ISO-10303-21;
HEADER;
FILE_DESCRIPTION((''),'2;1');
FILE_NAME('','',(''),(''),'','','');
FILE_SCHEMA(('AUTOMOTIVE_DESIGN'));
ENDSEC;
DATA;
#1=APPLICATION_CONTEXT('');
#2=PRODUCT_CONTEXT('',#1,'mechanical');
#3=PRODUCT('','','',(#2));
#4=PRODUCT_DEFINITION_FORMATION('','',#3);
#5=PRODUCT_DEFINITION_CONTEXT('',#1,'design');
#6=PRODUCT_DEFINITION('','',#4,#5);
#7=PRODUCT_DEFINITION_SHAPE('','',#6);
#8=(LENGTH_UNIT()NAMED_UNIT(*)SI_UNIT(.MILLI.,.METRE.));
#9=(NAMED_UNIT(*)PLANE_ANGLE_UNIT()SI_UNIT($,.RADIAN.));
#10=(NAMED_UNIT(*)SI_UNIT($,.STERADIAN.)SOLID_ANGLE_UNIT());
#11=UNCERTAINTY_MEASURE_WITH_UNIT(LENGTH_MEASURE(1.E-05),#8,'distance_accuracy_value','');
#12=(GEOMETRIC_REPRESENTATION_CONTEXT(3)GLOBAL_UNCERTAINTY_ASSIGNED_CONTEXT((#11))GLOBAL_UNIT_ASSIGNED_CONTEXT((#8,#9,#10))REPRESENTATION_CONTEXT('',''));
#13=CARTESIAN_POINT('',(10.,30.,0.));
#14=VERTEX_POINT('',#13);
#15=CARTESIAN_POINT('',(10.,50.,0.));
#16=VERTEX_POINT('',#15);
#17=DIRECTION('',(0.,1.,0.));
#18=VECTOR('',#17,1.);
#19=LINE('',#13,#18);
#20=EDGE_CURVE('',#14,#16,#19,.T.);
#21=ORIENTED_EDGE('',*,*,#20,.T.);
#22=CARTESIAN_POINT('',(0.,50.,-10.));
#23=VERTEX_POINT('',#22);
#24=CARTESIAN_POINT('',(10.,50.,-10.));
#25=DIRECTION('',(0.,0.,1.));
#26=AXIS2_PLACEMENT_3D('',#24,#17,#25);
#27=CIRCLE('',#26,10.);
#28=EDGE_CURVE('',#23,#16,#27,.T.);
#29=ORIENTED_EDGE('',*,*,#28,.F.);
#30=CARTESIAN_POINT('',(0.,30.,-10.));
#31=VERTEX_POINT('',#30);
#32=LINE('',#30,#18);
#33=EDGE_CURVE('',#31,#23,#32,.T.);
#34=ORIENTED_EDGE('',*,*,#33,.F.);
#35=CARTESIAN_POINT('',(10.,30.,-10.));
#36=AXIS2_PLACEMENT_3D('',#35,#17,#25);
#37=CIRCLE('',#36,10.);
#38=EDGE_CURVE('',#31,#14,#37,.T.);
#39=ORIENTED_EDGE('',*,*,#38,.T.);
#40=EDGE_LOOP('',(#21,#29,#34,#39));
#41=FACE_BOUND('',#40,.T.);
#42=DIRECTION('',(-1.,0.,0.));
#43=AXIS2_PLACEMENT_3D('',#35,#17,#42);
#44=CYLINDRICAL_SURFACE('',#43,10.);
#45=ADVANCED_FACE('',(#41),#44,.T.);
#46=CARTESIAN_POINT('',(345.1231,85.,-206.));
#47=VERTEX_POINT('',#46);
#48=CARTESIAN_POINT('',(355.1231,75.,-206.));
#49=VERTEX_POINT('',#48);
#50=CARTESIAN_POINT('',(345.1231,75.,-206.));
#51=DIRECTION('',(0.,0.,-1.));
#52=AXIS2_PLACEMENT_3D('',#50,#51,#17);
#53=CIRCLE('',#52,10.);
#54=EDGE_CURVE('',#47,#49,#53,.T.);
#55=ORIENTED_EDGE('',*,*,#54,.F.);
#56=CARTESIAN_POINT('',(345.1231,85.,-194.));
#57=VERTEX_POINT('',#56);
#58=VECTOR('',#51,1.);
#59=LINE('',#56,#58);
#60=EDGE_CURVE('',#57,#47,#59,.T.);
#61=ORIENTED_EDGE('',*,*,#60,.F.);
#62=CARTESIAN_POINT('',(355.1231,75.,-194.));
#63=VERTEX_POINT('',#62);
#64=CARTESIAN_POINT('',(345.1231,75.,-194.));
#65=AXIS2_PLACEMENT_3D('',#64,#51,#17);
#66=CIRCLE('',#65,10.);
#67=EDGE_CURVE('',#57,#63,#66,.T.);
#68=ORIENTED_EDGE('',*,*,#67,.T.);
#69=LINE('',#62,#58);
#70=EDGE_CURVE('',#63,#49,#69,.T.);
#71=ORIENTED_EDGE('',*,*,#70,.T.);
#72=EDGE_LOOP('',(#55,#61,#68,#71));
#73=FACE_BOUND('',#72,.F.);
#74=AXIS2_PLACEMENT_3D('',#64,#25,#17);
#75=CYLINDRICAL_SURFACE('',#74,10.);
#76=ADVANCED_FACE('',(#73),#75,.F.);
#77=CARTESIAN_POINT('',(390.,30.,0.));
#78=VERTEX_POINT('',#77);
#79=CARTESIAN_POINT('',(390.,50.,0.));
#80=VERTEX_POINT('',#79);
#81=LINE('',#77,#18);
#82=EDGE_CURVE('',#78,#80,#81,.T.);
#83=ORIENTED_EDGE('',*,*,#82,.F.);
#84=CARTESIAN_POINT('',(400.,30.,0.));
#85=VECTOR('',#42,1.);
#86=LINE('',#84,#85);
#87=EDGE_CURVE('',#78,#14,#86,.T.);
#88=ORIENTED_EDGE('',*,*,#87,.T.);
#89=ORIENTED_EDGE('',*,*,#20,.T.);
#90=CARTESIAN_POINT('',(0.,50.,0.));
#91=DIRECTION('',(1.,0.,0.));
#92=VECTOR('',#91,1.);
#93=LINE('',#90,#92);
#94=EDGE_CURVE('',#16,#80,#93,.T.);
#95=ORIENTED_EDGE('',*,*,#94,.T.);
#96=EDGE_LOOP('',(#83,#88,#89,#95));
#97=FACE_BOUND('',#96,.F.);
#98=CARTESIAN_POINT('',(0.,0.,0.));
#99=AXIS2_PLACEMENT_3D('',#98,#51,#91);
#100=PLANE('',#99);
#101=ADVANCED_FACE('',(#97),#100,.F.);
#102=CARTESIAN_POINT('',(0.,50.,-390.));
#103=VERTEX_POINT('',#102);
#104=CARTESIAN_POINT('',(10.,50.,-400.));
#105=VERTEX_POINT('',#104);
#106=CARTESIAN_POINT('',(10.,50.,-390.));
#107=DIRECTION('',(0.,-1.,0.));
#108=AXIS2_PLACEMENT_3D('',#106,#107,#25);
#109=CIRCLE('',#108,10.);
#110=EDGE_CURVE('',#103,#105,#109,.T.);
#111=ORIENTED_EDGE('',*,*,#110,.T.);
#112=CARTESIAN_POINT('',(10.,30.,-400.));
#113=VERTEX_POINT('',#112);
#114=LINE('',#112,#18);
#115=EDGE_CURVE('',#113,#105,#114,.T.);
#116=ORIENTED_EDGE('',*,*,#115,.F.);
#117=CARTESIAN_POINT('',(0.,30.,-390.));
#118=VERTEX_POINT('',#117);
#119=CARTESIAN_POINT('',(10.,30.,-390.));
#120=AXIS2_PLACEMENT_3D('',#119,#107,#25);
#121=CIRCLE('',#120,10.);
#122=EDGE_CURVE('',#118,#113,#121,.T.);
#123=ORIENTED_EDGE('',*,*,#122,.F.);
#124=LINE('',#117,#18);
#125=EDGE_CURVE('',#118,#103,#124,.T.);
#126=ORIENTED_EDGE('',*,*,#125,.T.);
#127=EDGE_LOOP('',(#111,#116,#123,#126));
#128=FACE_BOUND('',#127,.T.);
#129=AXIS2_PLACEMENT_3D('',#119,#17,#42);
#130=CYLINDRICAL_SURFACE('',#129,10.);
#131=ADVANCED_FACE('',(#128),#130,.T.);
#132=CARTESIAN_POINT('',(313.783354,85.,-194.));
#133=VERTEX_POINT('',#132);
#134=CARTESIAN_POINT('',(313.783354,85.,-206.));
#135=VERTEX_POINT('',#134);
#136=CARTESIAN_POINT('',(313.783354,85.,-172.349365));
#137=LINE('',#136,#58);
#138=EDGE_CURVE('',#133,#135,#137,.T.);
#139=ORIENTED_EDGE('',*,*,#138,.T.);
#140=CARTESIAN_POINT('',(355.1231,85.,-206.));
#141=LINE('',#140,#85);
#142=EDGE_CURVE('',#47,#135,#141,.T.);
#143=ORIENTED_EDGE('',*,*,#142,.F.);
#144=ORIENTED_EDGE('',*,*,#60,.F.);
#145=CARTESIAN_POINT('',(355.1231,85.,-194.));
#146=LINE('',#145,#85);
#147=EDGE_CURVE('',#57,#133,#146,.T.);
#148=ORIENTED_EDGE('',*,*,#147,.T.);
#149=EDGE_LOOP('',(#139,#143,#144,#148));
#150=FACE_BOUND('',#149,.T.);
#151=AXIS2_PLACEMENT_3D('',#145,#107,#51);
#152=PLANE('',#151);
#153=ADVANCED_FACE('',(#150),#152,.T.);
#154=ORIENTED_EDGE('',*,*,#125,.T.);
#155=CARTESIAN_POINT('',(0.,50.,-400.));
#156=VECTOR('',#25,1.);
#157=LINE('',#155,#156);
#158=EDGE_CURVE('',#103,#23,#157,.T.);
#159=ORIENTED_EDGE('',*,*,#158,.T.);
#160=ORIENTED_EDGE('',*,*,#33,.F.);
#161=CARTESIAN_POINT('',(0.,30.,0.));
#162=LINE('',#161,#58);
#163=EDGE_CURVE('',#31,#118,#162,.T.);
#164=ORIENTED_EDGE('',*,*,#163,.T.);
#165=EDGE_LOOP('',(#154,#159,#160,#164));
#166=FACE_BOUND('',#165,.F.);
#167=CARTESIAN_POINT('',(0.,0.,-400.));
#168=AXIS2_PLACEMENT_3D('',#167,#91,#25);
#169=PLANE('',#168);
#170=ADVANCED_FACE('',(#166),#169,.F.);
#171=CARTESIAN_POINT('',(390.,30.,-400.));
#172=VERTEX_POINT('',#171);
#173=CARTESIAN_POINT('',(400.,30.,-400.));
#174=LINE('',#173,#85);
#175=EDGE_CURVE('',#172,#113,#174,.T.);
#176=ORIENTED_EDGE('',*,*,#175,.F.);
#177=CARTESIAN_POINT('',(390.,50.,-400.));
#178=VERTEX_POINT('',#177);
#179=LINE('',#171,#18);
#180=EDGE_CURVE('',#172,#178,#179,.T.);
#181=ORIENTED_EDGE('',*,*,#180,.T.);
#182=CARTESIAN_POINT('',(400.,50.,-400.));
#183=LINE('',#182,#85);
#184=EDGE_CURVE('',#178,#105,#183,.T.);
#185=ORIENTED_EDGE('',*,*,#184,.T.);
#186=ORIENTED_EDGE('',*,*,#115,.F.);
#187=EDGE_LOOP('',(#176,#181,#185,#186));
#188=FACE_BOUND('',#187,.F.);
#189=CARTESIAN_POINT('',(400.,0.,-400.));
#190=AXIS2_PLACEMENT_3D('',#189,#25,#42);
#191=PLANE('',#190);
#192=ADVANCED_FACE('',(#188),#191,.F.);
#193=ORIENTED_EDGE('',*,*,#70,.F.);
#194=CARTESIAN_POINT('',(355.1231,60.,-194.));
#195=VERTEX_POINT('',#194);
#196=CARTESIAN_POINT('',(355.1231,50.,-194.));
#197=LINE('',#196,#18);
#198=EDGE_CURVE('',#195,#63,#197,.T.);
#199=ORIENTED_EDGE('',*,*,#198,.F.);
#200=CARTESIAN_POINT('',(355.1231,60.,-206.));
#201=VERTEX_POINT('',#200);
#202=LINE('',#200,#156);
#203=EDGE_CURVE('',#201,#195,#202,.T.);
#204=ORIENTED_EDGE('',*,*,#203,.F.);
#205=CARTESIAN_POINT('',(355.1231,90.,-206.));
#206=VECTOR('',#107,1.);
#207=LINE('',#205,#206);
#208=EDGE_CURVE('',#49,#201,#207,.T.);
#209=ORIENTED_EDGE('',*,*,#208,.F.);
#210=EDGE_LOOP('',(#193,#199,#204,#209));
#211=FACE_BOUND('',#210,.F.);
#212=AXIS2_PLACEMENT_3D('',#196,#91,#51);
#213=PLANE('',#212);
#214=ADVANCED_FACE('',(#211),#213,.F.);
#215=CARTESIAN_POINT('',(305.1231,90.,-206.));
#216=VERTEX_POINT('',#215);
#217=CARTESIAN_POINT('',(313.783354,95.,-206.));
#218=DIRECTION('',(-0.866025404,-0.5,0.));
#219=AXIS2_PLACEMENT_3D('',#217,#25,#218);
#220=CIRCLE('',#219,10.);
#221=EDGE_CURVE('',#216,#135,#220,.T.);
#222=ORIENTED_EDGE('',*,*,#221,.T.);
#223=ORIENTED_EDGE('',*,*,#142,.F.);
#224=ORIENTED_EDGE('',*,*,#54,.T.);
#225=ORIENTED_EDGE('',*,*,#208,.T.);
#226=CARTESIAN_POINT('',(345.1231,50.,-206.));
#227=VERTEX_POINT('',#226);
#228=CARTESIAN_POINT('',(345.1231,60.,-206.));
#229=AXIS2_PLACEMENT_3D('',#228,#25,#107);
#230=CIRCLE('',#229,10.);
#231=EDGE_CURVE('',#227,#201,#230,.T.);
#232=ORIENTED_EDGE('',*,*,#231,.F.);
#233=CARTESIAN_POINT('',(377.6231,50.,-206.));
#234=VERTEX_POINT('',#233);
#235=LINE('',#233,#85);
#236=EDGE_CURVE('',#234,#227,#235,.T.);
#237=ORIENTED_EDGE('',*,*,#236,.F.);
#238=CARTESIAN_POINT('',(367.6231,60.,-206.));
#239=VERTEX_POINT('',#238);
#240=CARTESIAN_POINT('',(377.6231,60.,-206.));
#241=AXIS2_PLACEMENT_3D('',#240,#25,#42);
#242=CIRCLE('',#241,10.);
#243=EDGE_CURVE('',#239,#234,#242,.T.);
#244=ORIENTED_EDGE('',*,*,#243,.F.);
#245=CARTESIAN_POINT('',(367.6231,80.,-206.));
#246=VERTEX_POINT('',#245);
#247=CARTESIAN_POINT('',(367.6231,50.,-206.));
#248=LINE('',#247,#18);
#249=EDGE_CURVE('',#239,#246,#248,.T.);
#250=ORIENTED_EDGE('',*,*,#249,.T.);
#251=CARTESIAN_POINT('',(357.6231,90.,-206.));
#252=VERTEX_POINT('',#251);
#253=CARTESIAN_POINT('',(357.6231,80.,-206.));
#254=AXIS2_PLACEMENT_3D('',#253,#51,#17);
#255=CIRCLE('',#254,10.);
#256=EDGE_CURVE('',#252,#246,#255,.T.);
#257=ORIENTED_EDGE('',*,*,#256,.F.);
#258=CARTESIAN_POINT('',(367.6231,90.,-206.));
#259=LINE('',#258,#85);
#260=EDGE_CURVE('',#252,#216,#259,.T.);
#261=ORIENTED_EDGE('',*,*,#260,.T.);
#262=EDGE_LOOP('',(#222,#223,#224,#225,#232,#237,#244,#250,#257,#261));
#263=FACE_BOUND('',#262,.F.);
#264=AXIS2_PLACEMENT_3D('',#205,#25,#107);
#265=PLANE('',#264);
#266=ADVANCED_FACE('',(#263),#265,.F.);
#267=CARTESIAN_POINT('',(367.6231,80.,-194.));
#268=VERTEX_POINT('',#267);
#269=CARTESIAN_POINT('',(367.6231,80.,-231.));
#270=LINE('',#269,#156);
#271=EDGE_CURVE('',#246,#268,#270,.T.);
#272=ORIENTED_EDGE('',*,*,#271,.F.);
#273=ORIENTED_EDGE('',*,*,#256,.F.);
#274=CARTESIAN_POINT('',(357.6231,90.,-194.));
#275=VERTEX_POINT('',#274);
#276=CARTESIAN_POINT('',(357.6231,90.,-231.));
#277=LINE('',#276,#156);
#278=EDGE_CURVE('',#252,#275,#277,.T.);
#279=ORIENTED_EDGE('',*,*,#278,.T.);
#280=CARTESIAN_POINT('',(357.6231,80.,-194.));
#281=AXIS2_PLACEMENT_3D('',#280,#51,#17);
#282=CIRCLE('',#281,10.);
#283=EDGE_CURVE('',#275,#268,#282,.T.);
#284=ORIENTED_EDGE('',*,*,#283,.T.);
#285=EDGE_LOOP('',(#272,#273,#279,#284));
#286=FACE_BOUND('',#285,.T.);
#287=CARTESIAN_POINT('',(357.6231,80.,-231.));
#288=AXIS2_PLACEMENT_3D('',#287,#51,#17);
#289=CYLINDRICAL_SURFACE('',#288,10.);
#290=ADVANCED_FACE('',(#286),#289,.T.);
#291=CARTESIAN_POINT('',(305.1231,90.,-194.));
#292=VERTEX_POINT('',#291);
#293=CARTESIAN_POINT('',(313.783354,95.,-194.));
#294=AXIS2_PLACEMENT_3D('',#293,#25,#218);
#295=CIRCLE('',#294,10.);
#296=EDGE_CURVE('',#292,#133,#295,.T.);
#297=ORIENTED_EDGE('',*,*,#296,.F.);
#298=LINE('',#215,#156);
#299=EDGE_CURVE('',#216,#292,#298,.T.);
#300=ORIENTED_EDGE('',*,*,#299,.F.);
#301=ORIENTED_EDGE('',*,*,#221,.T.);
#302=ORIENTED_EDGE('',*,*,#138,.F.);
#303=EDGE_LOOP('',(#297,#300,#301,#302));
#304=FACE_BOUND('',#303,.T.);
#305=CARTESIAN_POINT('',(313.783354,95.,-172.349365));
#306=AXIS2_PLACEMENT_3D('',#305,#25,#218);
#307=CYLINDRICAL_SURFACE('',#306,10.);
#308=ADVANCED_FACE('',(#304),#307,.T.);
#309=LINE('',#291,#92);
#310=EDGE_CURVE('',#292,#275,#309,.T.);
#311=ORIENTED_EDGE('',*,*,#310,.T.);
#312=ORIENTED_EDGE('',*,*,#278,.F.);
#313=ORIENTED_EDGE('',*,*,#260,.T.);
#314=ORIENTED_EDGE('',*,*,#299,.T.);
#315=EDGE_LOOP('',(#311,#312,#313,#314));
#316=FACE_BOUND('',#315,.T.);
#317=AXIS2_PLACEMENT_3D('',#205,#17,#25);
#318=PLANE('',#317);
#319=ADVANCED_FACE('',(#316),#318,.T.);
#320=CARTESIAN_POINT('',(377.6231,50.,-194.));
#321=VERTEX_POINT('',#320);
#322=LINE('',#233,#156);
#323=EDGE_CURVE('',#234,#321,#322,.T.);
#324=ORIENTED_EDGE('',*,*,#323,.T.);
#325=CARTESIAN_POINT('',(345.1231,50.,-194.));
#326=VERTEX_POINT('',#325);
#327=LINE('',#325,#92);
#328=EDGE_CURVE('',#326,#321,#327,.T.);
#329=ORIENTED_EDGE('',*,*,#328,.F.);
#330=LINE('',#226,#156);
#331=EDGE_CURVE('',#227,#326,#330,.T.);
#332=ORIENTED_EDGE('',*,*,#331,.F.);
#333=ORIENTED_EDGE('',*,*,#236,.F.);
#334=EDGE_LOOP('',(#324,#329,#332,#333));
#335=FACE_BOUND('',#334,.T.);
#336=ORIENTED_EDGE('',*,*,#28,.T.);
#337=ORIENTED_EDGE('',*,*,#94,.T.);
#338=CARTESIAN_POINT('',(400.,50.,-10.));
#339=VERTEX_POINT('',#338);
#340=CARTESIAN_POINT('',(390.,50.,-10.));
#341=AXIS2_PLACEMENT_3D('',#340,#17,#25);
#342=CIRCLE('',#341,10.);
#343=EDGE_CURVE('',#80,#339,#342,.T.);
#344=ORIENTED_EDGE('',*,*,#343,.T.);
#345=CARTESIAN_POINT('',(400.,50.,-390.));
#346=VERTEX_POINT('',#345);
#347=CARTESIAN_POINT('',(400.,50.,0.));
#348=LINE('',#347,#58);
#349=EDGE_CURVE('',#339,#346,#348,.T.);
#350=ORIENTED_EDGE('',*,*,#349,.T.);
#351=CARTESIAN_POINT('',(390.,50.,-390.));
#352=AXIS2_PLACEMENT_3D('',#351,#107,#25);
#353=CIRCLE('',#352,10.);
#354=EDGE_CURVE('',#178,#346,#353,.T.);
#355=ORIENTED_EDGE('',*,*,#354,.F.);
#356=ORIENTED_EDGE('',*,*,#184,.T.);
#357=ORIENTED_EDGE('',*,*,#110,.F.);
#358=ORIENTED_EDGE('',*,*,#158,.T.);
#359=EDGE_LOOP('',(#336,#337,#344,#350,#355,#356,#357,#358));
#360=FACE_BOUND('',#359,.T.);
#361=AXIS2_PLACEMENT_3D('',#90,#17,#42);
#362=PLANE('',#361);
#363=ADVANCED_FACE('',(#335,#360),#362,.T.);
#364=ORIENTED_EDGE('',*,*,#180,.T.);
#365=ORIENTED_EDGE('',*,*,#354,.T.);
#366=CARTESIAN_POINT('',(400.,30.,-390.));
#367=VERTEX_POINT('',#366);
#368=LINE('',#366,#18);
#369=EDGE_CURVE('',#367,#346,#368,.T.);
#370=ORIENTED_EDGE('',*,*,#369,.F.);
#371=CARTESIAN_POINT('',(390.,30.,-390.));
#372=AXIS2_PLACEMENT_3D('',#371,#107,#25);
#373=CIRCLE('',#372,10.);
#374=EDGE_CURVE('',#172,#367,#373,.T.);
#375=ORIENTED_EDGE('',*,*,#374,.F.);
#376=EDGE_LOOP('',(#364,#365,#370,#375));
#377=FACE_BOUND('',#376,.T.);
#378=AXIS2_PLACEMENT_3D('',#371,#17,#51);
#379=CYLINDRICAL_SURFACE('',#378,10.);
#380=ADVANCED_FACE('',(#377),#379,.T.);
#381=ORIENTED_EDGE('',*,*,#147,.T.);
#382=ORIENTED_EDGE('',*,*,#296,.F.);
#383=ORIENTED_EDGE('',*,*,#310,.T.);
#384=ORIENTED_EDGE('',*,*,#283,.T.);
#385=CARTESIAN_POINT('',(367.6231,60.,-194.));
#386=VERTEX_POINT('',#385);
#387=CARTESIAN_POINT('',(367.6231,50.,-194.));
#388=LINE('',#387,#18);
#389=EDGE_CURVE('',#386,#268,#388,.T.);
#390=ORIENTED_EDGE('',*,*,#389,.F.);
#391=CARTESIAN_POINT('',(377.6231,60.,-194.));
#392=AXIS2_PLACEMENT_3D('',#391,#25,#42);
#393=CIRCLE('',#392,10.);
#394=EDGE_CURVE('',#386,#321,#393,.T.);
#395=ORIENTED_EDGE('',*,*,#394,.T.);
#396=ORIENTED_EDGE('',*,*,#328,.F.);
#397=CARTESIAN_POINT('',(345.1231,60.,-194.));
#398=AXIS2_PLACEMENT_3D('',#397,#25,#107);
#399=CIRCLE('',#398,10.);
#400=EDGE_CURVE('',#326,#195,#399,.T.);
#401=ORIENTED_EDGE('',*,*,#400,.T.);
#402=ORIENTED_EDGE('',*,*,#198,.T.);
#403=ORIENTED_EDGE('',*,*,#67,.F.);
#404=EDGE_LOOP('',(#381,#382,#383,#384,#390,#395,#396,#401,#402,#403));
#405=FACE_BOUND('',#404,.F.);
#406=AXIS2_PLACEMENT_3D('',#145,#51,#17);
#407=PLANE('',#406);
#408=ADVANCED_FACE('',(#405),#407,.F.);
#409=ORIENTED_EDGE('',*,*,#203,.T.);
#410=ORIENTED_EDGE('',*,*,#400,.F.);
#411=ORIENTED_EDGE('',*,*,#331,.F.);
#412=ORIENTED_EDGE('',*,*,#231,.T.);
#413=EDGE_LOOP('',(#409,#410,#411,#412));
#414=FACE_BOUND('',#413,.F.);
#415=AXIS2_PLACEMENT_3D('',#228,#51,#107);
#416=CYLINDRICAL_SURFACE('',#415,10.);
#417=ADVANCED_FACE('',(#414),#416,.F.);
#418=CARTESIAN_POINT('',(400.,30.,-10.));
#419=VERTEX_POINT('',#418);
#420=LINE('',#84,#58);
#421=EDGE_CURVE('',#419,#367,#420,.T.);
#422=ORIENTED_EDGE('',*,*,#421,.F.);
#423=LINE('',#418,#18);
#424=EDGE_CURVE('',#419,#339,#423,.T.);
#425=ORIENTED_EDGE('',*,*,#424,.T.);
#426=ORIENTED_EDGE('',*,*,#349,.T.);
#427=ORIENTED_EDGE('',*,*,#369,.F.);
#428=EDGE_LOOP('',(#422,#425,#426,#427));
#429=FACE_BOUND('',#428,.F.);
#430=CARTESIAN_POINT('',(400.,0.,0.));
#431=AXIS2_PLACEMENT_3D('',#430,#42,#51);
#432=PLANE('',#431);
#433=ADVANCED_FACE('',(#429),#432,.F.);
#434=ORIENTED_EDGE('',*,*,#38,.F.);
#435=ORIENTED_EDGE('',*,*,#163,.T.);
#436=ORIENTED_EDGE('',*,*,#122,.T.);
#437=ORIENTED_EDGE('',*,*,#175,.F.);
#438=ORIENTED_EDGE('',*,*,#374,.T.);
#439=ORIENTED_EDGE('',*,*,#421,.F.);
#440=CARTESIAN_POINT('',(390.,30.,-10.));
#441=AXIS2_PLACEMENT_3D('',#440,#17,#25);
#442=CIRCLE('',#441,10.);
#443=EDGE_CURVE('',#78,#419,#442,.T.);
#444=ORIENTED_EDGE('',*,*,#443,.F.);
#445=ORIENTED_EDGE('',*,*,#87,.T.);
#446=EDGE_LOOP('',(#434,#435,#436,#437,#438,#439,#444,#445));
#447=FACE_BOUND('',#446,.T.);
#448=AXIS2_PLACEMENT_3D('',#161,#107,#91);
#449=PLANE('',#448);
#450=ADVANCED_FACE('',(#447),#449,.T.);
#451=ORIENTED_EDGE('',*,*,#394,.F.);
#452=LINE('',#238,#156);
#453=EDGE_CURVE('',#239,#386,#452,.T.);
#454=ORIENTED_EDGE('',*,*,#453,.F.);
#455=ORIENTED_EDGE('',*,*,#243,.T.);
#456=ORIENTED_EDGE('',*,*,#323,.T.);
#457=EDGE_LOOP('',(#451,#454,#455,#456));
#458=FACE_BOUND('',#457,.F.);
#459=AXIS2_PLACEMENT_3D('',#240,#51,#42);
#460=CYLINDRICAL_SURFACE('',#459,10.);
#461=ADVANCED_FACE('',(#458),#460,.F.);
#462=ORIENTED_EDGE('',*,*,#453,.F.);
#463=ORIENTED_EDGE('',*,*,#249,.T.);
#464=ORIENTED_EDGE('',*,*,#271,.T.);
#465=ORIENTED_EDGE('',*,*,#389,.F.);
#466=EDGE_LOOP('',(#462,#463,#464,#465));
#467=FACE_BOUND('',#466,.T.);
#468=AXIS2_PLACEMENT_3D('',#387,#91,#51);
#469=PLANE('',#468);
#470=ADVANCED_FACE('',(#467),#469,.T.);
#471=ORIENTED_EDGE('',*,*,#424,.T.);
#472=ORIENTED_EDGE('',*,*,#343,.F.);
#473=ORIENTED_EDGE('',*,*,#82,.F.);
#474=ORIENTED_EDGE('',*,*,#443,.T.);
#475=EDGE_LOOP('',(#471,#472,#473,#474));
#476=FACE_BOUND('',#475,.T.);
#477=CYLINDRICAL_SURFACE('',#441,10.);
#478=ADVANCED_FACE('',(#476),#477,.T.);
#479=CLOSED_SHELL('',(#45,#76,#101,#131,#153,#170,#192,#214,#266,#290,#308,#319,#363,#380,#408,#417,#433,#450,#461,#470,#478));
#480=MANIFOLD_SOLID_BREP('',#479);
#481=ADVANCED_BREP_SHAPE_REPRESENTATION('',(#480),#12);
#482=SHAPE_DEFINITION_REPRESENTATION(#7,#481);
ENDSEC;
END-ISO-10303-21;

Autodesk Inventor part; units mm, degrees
ref_plane "YZ Plane" through (0, 0, 0) normal (1, 0, 0) x (0, 1, 0)
ref_plane "XZ Plane" through (0, 0, 0) normal (0, 1, 0) x (-1, 0, 0)
ref_plane "XY Plane" through (0, 0, 0) normal (0, 0, 1) x (1, 0, 0)
sketch "Sketch1" plane through (0, 0, 0) normal (0, 1, 0) x (-1, 0, 0)
  point P0 (0, 0)
sketch "Sketch2" plane through (0, 0, 0) normal (0, 1, 0) x (-1, 0, 0)
  line L0 (0, 0) -> (-400, 0)
  line L1 (-400, 0) -> (-400, -400)
  line L2 (-400, -400) -> (0, -400)
  line L3 (0, -400) -> (0, 0)
  dimension "d0" = 400
  dimension "d1" = 400
extrude "Extrusion1" add sketch "Sketch2" along normal blind 50
sketch "Sketch3" plane through (0, 50, 0) normal (0, 1, 0) x (1, 0, 0)
  line L0 (0, 400) -> (0, 0) projected
  line L1 (0, 200) -> (400, 200)
  line L2 (400, 0) -> (400, 400) projected
  line L3 (330.1231, 200) -> (330.1231, 206)
  line L4 (330.1231, 200) -> (330.1231, 194)
  line L5 (330.1231, 194) -> (325.1231, 194)
  line L6 (325.1231, 194) -> (325.1231, 206)
  line L7 (325.1231, 206) -> (330.1231, 206)
  dimension "d4" = 6
  dimension "d5" = 6
  dimension "d6" = 5
extrude "Extrusion2" add sketch "Sketch3" along normal blind 40
sketch "Sketch4" plane through (0, 0, 0) normal (0, -1, 0) x (1, 0, 0)
  line L0 (400, -400) -> (0, -400) projected
  line L1 (400, 0) -> (400, -400) projected
  line L2 (0, -400) -> (400, -400)
  line L3 (400, -400) -> (400, 0)
  line L4 (400, 0) -> (0, 0)
  line L5 (0, 0) -> (0, -400)
extrude "Extrusion3" cut sketch "Sketch4" against normal blind 30
fillet "Fillet1" radius 10 4 edges at (0, 40, 0) (0, 40, -400) (400, 40, -400) (400, 40, 0)
sketch "Sketch5" plane through (330.1231, 50, -194) normal (1, 0, 0) x (0, 0, -1)
  line L0 (0, 0) -> (0, 40) projected
  line L1 (0, 0) -> (12, 0) projected
  line L2 (0, 40) -> (12, 40)
  line L3 (12, 40) -> (12, 0)
  line L4 (12, 0) -> (0, 0)
  line L5 (0, 0) -> (0, 40)
  point P0 (-194, -50)
extrude "Extrusion4" add sketch "Sketch5" along normal blind 60
sketch "Sketch7" plane through (325.1231, 50, -206) normal (-1, 0, 0) x (0, 0, 1)
  line L0 (0, 40) -> (12, 40) projected
  line L1 (12, 0) -> (0, 0) projected
  line L2 (0, 40) -> (12, 40)
  line L3 (12, 40) -> (12, 0)
  line L4 (12, 0) -> (0, 0)
  line L5 (0, 0) -> (0, 40)
  point P0 (206, -50)
extrude "Extrusion6" cut sketch "Sketch7" against normal blind 45
sketch "Sketch8" plane through (390.1231, 50, -194) normal (1, 0, 0) x (0, 0, -1)
  line L0 (12, 40) -> (0, 40) projected
  line L1 (12, 0) -> (0, 0) projected
  line L2 (0, 40) -> (12, 40)
  line L3 (12, 40) -> (12, 0)
  line L4 (12, 0) -> (0, 0)
  line L5 (0, 0) -> (0, 40)
  point P0 (-194, -50)
extrude "Extrusion7" add sketch "Sketch8" against normal blind 35
sketch "Sketch9" plane through (390.1231, 50, -194) normal (1, 0, 0) x (0, 0, -1)
  line L0 (12, 40) -> (0, 40) projected
  line L1 (12, 0) -> (12, 40) projected
  line L2 (0, 40) -> (12, 40)
  line L3 (12, 40) -> (12, 0)
  line L4 (12, 0) -> (0, 0)
  line L5 (0, 0) -> (0, 40)
  point P0 (-194, -50)
extrude "Extrusion8" cut sketch "Sketch9" against normal blind 22.5
sketch "Sketch10" plane through (355.1231, 50, -194) normal (-1, 0, 0) x (0, 0, 1)
  line L0 (-12, 40) -> (-12, 0) projected
  line L1 (0, 0) -> (0, 40) projected
  line L2 (-12, 40) -> (0, 40)
  line L3 (0, 40) -> (0, 35)
  line L4 (0, 35) -> (-12, 35)
  line L5 (-12, 35) -> (-12, 40)
  point P0 (194, -50)
  dimension "d22" = 5
extrude "Extrusion9" add sketch "Sketch10" along normal blind 50
fillet "Fillet2" radius 10 5 edges at (367.6231, 90, -200) (355.1231, 85, -200) (305.1231, 85, -200) (355.1231, 50, -200) (367.6231, 50, -200)
sketch "Sketch6" plane through (325.1231, 50, -206) normal (-1, 0, 0) x (0, 0, 1)
  line L0 (0, 0) -> (0, 40) projected
  line L1 (12, 40) -> (12, 0) projected
  line L2 (0, 40) -> (12, 40)
  line L3 (12, 40) -> (12, 0)
  line L4 (12, 0) -> (0, 0)
  line L5 (0, 0) -> (0, 40)
  point P0 (206, -50)
properties part number "wood part 2"
